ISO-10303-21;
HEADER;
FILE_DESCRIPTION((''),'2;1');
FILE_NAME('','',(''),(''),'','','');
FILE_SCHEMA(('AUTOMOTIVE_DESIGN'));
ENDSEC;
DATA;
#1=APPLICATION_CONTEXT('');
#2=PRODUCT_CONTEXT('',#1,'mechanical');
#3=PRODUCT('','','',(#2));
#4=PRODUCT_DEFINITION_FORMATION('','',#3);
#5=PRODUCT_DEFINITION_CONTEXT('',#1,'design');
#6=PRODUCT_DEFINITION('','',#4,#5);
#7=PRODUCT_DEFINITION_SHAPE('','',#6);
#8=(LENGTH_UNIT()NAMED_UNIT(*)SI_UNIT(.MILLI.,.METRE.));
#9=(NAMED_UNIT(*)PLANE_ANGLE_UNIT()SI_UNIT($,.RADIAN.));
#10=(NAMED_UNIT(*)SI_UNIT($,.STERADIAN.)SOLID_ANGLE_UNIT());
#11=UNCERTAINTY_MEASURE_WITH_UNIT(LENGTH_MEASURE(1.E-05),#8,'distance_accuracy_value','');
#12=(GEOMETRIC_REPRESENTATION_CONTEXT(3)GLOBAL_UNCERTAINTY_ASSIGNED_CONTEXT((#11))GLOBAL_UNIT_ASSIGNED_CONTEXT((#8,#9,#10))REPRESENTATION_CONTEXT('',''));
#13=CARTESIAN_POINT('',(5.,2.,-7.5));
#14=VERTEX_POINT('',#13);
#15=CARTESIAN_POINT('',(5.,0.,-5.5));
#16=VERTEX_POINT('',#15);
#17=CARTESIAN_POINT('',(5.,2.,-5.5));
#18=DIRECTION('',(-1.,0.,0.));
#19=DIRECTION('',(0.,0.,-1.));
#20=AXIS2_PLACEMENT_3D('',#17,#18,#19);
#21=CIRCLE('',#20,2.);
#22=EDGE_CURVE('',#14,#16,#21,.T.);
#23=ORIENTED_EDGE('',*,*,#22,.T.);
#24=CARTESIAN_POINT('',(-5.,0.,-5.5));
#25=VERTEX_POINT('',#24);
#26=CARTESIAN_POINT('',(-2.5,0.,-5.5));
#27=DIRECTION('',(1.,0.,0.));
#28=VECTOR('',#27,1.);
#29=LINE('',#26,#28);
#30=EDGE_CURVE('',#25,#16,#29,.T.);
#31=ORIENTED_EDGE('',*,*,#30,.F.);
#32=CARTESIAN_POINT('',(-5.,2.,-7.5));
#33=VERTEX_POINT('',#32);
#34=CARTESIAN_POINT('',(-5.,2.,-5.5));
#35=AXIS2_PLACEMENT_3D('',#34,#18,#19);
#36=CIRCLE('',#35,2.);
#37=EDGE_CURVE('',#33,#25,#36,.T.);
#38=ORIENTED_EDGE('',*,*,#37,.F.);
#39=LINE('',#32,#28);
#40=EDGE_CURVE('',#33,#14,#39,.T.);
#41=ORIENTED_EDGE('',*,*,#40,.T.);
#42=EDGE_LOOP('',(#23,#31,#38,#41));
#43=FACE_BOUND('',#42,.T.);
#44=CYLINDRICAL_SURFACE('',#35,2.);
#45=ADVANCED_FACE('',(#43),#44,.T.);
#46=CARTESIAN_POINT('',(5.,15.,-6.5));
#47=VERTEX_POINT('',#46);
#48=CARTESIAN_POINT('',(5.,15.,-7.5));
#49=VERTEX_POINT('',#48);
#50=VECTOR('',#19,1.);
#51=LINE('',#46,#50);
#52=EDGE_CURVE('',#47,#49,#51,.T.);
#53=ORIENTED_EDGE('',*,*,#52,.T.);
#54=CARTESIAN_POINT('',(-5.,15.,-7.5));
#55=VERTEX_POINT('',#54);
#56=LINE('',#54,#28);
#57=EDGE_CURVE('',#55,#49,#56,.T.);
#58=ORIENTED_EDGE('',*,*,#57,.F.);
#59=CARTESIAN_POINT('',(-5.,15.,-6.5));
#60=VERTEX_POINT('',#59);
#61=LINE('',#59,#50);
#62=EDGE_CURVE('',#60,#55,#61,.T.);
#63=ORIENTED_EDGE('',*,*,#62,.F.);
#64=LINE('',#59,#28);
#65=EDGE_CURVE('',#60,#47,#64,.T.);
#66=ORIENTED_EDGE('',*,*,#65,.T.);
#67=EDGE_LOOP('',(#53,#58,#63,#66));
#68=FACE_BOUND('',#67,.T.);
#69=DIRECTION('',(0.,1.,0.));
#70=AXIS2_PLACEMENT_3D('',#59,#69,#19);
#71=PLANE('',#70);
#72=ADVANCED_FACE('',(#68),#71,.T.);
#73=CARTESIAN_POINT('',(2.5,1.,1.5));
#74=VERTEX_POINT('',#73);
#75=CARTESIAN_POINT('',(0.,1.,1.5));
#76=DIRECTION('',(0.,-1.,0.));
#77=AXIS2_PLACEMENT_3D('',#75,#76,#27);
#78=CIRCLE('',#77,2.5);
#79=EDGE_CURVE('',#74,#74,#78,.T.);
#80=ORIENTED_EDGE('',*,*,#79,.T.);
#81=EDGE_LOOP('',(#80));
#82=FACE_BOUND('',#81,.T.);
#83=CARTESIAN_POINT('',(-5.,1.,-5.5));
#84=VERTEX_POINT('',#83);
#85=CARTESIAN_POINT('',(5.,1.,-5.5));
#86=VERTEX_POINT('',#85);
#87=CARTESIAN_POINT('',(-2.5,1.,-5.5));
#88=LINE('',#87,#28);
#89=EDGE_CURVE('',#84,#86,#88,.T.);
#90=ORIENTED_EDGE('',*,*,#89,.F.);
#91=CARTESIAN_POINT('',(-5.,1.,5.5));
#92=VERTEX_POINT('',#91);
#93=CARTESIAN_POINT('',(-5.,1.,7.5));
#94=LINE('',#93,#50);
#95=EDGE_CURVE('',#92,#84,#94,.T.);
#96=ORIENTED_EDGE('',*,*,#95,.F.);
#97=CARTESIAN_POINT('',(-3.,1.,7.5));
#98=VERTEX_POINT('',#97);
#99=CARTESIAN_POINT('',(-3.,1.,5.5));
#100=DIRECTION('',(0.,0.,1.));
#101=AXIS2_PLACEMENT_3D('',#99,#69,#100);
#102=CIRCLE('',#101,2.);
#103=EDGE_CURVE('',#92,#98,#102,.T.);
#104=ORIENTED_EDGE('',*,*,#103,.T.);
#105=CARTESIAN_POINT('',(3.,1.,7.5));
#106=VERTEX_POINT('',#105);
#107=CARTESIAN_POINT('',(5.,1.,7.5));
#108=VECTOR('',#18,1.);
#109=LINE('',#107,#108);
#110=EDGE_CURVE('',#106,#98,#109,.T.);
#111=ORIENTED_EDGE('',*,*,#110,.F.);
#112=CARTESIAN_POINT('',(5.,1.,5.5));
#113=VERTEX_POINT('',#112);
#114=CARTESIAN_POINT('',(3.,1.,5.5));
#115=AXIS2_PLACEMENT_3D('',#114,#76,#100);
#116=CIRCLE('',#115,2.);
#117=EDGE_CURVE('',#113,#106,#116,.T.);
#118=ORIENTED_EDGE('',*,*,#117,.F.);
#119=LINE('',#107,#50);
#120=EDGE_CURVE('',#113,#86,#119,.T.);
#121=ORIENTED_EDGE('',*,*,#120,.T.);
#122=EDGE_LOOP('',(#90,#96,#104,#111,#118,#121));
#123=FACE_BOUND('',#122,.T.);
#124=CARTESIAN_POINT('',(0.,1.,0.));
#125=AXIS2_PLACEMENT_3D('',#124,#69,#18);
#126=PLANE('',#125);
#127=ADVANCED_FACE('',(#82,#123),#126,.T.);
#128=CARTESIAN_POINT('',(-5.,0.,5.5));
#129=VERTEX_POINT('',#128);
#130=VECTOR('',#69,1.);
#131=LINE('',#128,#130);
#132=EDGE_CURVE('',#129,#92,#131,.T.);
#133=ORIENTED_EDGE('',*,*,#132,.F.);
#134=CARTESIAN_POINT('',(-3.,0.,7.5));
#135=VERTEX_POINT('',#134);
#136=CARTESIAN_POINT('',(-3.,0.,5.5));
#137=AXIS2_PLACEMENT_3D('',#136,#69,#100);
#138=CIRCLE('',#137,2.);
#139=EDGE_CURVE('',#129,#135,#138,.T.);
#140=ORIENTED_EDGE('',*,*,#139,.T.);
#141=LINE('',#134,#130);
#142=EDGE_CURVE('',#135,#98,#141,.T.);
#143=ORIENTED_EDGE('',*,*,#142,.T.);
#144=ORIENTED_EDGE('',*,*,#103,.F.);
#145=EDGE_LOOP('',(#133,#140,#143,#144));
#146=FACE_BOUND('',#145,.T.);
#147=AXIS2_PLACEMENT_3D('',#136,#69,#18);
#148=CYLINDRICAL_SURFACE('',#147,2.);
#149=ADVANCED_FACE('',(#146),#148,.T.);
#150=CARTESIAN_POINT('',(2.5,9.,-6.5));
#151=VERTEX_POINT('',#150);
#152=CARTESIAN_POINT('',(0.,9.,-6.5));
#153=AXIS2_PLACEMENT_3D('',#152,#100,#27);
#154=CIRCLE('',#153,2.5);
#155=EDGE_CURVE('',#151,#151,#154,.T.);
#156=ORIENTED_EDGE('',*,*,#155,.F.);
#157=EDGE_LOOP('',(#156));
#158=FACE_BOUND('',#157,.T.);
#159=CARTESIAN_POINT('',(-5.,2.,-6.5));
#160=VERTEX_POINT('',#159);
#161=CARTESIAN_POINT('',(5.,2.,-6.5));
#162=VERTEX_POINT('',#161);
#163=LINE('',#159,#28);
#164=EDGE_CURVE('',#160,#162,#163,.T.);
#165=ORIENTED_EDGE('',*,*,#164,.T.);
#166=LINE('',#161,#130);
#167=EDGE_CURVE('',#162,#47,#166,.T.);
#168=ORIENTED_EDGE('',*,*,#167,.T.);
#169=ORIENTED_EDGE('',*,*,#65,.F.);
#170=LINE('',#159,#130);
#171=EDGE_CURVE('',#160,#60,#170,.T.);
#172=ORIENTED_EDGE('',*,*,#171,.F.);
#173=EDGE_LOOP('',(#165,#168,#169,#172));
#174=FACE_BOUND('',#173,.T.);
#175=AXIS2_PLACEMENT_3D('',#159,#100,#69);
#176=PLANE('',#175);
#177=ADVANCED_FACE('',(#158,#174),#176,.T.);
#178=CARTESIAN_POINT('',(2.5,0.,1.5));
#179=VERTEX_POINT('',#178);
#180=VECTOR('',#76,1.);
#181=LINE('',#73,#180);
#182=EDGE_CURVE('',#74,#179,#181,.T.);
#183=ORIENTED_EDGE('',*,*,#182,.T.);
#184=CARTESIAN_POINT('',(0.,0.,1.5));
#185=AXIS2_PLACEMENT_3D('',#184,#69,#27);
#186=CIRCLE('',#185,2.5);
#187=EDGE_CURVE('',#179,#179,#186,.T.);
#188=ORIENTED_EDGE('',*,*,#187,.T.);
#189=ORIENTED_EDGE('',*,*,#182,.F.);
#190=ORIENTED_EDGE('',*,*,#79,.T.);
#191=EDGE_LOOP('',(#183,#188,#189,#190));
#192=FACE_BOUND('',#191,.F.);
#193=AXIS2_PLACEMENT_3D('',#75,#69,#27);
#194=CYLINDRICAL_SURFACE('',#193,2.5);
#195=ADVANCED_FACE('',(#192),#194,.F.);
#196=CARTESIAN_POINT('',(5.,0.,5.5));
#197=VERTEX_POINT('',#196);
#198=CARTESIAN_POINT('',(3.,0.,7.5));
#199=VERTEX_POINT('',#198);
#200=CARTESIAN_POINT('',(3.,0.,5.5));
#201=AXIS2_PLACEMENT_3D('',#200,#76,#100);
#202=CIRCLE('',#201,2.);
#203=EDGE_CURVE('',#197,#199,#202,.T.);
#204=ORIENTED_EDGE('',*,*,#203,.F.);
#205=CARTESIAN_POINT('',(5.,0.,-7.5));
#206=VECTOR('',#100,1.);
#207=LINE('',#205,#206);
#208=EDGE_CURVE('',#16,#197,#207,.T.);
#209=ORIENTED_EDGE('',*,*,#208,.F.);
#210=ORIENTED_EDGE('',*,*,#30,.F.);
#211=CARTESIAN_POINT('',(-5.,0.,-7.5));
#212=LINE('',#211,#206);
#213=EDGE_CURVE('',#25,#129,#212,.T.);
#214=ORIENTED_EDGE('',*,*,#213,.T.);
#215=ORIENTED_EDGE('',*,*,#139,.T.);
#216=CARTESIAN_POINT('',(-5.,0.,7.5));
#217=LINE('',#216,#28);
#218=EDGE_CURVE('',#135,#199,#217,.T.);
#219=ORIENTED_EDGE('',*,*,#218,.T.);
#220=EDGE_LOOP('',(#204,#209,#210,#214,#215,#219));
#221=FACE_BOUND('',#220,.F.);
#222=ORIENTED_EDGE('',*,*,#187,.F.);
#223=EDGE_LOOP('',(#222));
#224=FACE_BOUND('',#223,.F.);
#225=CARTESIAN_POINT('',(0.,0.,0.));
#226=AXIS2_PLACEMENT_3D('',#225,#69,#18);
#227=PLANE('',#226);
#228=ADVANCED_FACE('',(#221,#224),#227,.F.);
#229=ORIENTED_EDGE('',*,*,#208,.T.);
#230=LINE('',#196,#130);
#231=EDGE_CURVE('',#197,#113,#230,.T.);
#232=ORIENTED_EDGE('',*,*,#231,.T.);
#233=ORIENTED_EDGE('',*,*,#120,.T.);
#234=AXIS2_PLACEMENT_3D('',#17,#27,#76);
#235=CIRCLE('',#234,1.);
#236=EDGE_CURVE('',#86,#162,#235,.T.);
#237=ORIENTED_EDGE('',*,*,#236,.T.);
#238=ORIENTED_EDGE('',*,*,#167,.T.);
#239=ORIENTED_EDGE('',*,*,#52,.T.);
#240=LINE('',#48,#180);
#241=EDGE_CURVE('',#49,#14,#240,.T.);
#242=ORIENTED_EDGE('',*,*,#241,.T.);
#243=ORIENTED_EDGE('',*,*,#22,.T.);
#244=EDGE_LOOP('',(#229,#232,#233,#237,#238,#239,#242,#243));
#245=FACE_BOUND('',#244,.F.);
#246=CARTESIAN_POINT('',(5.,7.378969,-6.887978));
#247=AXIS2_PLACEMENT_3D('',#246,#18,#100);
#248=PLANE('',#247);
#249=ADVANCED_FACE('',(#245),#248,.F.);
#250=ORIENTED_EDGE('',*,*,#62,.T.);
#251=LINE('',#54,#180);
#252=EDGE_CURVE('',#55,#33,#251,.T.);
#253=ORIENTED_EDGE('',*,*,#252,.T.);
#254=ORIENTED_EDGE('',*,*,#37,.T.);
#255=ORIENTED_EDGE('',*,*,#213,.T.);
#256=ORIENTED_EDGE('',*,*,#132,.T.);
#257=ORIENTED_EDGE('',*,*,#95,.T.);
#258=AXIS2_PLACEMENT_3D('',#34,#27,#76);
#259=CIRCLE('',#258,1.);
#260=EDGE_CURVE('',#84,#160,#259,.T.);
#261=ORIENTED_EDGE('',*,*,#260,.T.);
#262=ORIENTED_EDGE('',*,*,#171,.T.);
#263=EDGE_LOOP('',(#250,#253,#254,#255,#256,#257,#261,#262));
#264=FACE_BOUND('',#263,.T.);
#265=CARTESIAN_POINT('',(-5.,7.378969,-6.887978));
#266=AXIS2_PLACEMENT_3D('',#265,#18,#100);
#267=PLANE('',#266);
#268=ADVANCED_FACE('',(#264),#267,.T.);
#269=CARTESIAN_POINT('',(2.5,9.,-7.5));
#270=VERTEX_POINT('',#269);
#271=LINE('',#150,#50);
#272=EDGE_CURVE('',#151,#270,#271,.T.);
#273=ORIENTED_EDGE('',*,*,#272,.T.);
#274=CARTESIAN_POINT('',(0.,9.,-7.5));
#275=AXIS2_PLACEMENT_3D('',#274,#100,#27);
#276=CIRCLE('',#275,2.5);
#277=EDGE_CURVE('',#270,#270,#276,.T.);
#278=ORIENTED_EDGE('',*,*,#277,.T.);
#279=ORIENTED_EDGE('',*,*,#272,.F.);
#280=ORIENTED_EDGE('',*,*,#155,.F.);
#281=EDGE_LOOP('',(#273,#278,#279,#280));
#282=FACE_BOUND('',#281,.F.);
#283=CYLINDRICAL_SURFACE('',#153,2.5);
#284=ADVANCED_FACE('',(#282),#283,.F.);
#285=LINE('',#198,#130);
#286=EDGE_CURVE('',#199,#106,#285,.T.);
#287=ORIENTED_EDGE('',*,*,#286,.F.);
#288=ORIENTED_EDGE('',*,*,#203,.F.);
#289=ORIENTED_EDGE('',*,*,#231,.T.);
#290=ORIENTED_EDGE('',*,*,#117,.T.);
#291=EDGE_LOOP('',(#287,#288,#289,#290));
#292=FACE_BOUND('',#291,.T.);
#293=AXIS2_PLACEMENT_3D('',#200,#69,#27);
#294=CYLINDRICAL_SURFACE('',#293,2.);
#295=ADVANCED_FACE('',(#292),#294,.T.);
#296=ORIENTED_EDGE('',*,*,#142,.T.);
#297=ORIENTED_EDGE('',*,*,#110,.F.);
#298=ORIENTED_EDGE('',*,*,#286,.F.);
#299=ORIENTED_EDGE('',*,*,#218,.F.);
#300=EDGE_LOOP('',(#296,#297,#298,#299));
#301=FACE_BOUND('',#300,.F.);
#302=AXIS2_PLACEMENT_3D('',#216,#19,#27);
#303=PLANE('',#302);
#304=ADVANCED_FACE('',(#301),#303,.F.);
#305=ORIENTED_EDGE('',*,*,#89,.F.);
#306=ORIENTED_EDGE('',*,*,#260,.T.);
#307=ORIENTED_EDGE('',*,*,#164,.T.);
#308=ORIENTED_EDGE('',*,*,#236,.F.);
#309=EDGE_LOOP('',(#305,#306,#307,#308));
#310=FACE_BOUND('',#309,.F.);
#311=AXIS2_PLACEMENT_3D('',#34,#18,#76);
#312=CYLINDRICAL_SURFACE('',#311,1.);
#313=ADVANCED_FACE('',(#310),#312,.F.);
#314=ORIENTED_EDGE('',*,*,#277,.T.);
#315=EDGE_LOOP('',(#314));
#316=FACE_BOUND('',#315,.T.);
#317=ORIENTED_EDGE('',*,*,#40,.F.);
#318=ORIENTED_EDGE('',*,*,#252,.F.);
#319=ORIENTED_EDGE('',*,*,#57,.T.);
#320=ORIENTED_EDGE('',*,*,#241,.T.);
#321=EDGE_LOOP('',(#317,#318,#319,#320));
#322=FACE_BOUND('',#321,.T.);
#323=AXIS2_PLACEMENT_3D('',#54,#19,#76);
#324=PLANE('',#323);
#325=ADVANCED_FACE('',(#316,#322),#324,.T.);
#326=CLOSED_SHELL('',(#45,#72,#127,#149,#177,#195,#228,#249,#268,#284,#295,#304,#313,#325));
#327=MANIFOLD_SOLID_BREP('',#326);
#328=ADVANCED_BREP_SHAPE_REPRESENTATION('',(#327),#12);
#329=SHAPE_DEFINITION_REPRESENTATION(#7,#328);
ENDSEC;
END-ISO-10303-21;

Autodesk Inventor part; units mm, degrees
ref_plane "YZ Plane" through (0, 0, 0) normal (1, 0, 0) x (0, 1, 0)
ref_plane "XZ Plane" through (0, 0, 0) normal (0, 1, 0) x (-1, 0, 0)
ref_plane "XY Plane" through (0, 0, 0) normal (0, 0, 1) x (1, 0, 0)
sketch "スケッチ9" plane through (0, 0, 0) normal (0, 1, 0) x (-1, 0, 0)
  line L0 (5, 7.5) -> (-5, 7.5)
  line L1 (-5, 7.5) -> (-5, -7.5)
  line L2 (-5, -7.5) -> (5, -7.5)
  line L3 (5, -7.5) -> (5, 7.5)
  line L4 (7, 0) -> (-7, 0)
  line L5 (0, -10.5) -> (0, 10.5)
  point P0 (0, 0)
  point P1 (5, 0)
  point P2 (0, 7.5)
  dimension "d53" = 15
  dimension "d54" = 10
extrude "プレート7" add sketch "スケッチ9" along normal blind 1
sketch "スケッチ10" plane through (-5, 0, -6.5) normal (0, 0, -1) x (-1, 0, 0)
  line L0 (-10, 0) -> (0, 0)
  line L1 (0, 0) -> (0, 15)
  line L2 (0, 15) -> (-10, 15)
  line L3 (-10, 15) -> (-10, 0)
edge flange "フランジ5" height 15 angle 90 thickness 1 bend radius 1 thickness toward (0, 0, -1) relief tear relief width 1 relief depth 0.5 edges at (0, 1, -7.5) wall of the first edge with corners at (5, 0, -6.5) (-5, 0, -6.5) (-5, 15, -6.5) (5, 15, -6.5)
bend "曲げ5"
corner "コーナー5"
sketch "スケッチ11" plane through (-5, 15, -6.5) normal (0, 0, 1) x (1, 0, 0)
  circle A0 centre (5, -6) radius 2.5
  line L0 (10, 0) -> (0, 0) projected
  line L1 (0, 0) -> (0, -13) projected
  point P0 (5, -15)
  dimension "d66" = 5
  dimension "d67" = 6
  dimension "d76" = 5
sketch "スケッチ12" plane through (0, 1, 0) normal (0, 1, 0) x (1, 0, 0)
  circle A0 centre (0, -1.5) radius 2.5
  line L0 (5, -7.5) -> (-5, -7.5) projected
  line L1 (-5, -7.5) -> (-5, 5.5) projected
  line L2 (0, 11.6) -> (0, -13.6) projected
  point P0 (0, 0)
  dimension "d69" = 6
  dimension "d71" = 5
extrude "押し出し3" cut sketch "スケッチ12" against normal up to next
extrude "押し出し4" cut sketch "スケッチ11" against normal up to next
fillet "フィレット2" radius 2 2 edges at (5, 0.5, 7.5) (-5, 0.5, 7.5)
equation "\"d55\" = Thickness"
equation "\"d56\" = BendReliefWidth"
equation "\"d57\" = BendReliefDepth"
equation "\"d58\" = MinimumRemnant"
equation "\"d59\" = TransitionRadius"
equation "\"d62\" = BendRadius"
equation "\"d63\" = CornerReliefSize"
equation "\"d64\" = GapSize"
equation "\"d65\" = JacobiRadiusSize"
equation "\"BendRadius\" = Thickness"
equation "\"BendReliefWidth\" = Thickness"
equation "\"BendReliefDepth\" = 0.5 * Thickness"
equation "\"CornerReliefSize\" = 4 * Thickness"
equation "\"MinimumRemnant\" = 2 * Thickness"
equation "\"TransitionRadius\" = BendRadius"
equation "\"JacobiRadiusSize\" = BendRadius"
equation "\"GapSize\" = Thickness"
equation "\"Thickness\" = 1"
properties part number "element_clip" material "アルミニウム 6061"
